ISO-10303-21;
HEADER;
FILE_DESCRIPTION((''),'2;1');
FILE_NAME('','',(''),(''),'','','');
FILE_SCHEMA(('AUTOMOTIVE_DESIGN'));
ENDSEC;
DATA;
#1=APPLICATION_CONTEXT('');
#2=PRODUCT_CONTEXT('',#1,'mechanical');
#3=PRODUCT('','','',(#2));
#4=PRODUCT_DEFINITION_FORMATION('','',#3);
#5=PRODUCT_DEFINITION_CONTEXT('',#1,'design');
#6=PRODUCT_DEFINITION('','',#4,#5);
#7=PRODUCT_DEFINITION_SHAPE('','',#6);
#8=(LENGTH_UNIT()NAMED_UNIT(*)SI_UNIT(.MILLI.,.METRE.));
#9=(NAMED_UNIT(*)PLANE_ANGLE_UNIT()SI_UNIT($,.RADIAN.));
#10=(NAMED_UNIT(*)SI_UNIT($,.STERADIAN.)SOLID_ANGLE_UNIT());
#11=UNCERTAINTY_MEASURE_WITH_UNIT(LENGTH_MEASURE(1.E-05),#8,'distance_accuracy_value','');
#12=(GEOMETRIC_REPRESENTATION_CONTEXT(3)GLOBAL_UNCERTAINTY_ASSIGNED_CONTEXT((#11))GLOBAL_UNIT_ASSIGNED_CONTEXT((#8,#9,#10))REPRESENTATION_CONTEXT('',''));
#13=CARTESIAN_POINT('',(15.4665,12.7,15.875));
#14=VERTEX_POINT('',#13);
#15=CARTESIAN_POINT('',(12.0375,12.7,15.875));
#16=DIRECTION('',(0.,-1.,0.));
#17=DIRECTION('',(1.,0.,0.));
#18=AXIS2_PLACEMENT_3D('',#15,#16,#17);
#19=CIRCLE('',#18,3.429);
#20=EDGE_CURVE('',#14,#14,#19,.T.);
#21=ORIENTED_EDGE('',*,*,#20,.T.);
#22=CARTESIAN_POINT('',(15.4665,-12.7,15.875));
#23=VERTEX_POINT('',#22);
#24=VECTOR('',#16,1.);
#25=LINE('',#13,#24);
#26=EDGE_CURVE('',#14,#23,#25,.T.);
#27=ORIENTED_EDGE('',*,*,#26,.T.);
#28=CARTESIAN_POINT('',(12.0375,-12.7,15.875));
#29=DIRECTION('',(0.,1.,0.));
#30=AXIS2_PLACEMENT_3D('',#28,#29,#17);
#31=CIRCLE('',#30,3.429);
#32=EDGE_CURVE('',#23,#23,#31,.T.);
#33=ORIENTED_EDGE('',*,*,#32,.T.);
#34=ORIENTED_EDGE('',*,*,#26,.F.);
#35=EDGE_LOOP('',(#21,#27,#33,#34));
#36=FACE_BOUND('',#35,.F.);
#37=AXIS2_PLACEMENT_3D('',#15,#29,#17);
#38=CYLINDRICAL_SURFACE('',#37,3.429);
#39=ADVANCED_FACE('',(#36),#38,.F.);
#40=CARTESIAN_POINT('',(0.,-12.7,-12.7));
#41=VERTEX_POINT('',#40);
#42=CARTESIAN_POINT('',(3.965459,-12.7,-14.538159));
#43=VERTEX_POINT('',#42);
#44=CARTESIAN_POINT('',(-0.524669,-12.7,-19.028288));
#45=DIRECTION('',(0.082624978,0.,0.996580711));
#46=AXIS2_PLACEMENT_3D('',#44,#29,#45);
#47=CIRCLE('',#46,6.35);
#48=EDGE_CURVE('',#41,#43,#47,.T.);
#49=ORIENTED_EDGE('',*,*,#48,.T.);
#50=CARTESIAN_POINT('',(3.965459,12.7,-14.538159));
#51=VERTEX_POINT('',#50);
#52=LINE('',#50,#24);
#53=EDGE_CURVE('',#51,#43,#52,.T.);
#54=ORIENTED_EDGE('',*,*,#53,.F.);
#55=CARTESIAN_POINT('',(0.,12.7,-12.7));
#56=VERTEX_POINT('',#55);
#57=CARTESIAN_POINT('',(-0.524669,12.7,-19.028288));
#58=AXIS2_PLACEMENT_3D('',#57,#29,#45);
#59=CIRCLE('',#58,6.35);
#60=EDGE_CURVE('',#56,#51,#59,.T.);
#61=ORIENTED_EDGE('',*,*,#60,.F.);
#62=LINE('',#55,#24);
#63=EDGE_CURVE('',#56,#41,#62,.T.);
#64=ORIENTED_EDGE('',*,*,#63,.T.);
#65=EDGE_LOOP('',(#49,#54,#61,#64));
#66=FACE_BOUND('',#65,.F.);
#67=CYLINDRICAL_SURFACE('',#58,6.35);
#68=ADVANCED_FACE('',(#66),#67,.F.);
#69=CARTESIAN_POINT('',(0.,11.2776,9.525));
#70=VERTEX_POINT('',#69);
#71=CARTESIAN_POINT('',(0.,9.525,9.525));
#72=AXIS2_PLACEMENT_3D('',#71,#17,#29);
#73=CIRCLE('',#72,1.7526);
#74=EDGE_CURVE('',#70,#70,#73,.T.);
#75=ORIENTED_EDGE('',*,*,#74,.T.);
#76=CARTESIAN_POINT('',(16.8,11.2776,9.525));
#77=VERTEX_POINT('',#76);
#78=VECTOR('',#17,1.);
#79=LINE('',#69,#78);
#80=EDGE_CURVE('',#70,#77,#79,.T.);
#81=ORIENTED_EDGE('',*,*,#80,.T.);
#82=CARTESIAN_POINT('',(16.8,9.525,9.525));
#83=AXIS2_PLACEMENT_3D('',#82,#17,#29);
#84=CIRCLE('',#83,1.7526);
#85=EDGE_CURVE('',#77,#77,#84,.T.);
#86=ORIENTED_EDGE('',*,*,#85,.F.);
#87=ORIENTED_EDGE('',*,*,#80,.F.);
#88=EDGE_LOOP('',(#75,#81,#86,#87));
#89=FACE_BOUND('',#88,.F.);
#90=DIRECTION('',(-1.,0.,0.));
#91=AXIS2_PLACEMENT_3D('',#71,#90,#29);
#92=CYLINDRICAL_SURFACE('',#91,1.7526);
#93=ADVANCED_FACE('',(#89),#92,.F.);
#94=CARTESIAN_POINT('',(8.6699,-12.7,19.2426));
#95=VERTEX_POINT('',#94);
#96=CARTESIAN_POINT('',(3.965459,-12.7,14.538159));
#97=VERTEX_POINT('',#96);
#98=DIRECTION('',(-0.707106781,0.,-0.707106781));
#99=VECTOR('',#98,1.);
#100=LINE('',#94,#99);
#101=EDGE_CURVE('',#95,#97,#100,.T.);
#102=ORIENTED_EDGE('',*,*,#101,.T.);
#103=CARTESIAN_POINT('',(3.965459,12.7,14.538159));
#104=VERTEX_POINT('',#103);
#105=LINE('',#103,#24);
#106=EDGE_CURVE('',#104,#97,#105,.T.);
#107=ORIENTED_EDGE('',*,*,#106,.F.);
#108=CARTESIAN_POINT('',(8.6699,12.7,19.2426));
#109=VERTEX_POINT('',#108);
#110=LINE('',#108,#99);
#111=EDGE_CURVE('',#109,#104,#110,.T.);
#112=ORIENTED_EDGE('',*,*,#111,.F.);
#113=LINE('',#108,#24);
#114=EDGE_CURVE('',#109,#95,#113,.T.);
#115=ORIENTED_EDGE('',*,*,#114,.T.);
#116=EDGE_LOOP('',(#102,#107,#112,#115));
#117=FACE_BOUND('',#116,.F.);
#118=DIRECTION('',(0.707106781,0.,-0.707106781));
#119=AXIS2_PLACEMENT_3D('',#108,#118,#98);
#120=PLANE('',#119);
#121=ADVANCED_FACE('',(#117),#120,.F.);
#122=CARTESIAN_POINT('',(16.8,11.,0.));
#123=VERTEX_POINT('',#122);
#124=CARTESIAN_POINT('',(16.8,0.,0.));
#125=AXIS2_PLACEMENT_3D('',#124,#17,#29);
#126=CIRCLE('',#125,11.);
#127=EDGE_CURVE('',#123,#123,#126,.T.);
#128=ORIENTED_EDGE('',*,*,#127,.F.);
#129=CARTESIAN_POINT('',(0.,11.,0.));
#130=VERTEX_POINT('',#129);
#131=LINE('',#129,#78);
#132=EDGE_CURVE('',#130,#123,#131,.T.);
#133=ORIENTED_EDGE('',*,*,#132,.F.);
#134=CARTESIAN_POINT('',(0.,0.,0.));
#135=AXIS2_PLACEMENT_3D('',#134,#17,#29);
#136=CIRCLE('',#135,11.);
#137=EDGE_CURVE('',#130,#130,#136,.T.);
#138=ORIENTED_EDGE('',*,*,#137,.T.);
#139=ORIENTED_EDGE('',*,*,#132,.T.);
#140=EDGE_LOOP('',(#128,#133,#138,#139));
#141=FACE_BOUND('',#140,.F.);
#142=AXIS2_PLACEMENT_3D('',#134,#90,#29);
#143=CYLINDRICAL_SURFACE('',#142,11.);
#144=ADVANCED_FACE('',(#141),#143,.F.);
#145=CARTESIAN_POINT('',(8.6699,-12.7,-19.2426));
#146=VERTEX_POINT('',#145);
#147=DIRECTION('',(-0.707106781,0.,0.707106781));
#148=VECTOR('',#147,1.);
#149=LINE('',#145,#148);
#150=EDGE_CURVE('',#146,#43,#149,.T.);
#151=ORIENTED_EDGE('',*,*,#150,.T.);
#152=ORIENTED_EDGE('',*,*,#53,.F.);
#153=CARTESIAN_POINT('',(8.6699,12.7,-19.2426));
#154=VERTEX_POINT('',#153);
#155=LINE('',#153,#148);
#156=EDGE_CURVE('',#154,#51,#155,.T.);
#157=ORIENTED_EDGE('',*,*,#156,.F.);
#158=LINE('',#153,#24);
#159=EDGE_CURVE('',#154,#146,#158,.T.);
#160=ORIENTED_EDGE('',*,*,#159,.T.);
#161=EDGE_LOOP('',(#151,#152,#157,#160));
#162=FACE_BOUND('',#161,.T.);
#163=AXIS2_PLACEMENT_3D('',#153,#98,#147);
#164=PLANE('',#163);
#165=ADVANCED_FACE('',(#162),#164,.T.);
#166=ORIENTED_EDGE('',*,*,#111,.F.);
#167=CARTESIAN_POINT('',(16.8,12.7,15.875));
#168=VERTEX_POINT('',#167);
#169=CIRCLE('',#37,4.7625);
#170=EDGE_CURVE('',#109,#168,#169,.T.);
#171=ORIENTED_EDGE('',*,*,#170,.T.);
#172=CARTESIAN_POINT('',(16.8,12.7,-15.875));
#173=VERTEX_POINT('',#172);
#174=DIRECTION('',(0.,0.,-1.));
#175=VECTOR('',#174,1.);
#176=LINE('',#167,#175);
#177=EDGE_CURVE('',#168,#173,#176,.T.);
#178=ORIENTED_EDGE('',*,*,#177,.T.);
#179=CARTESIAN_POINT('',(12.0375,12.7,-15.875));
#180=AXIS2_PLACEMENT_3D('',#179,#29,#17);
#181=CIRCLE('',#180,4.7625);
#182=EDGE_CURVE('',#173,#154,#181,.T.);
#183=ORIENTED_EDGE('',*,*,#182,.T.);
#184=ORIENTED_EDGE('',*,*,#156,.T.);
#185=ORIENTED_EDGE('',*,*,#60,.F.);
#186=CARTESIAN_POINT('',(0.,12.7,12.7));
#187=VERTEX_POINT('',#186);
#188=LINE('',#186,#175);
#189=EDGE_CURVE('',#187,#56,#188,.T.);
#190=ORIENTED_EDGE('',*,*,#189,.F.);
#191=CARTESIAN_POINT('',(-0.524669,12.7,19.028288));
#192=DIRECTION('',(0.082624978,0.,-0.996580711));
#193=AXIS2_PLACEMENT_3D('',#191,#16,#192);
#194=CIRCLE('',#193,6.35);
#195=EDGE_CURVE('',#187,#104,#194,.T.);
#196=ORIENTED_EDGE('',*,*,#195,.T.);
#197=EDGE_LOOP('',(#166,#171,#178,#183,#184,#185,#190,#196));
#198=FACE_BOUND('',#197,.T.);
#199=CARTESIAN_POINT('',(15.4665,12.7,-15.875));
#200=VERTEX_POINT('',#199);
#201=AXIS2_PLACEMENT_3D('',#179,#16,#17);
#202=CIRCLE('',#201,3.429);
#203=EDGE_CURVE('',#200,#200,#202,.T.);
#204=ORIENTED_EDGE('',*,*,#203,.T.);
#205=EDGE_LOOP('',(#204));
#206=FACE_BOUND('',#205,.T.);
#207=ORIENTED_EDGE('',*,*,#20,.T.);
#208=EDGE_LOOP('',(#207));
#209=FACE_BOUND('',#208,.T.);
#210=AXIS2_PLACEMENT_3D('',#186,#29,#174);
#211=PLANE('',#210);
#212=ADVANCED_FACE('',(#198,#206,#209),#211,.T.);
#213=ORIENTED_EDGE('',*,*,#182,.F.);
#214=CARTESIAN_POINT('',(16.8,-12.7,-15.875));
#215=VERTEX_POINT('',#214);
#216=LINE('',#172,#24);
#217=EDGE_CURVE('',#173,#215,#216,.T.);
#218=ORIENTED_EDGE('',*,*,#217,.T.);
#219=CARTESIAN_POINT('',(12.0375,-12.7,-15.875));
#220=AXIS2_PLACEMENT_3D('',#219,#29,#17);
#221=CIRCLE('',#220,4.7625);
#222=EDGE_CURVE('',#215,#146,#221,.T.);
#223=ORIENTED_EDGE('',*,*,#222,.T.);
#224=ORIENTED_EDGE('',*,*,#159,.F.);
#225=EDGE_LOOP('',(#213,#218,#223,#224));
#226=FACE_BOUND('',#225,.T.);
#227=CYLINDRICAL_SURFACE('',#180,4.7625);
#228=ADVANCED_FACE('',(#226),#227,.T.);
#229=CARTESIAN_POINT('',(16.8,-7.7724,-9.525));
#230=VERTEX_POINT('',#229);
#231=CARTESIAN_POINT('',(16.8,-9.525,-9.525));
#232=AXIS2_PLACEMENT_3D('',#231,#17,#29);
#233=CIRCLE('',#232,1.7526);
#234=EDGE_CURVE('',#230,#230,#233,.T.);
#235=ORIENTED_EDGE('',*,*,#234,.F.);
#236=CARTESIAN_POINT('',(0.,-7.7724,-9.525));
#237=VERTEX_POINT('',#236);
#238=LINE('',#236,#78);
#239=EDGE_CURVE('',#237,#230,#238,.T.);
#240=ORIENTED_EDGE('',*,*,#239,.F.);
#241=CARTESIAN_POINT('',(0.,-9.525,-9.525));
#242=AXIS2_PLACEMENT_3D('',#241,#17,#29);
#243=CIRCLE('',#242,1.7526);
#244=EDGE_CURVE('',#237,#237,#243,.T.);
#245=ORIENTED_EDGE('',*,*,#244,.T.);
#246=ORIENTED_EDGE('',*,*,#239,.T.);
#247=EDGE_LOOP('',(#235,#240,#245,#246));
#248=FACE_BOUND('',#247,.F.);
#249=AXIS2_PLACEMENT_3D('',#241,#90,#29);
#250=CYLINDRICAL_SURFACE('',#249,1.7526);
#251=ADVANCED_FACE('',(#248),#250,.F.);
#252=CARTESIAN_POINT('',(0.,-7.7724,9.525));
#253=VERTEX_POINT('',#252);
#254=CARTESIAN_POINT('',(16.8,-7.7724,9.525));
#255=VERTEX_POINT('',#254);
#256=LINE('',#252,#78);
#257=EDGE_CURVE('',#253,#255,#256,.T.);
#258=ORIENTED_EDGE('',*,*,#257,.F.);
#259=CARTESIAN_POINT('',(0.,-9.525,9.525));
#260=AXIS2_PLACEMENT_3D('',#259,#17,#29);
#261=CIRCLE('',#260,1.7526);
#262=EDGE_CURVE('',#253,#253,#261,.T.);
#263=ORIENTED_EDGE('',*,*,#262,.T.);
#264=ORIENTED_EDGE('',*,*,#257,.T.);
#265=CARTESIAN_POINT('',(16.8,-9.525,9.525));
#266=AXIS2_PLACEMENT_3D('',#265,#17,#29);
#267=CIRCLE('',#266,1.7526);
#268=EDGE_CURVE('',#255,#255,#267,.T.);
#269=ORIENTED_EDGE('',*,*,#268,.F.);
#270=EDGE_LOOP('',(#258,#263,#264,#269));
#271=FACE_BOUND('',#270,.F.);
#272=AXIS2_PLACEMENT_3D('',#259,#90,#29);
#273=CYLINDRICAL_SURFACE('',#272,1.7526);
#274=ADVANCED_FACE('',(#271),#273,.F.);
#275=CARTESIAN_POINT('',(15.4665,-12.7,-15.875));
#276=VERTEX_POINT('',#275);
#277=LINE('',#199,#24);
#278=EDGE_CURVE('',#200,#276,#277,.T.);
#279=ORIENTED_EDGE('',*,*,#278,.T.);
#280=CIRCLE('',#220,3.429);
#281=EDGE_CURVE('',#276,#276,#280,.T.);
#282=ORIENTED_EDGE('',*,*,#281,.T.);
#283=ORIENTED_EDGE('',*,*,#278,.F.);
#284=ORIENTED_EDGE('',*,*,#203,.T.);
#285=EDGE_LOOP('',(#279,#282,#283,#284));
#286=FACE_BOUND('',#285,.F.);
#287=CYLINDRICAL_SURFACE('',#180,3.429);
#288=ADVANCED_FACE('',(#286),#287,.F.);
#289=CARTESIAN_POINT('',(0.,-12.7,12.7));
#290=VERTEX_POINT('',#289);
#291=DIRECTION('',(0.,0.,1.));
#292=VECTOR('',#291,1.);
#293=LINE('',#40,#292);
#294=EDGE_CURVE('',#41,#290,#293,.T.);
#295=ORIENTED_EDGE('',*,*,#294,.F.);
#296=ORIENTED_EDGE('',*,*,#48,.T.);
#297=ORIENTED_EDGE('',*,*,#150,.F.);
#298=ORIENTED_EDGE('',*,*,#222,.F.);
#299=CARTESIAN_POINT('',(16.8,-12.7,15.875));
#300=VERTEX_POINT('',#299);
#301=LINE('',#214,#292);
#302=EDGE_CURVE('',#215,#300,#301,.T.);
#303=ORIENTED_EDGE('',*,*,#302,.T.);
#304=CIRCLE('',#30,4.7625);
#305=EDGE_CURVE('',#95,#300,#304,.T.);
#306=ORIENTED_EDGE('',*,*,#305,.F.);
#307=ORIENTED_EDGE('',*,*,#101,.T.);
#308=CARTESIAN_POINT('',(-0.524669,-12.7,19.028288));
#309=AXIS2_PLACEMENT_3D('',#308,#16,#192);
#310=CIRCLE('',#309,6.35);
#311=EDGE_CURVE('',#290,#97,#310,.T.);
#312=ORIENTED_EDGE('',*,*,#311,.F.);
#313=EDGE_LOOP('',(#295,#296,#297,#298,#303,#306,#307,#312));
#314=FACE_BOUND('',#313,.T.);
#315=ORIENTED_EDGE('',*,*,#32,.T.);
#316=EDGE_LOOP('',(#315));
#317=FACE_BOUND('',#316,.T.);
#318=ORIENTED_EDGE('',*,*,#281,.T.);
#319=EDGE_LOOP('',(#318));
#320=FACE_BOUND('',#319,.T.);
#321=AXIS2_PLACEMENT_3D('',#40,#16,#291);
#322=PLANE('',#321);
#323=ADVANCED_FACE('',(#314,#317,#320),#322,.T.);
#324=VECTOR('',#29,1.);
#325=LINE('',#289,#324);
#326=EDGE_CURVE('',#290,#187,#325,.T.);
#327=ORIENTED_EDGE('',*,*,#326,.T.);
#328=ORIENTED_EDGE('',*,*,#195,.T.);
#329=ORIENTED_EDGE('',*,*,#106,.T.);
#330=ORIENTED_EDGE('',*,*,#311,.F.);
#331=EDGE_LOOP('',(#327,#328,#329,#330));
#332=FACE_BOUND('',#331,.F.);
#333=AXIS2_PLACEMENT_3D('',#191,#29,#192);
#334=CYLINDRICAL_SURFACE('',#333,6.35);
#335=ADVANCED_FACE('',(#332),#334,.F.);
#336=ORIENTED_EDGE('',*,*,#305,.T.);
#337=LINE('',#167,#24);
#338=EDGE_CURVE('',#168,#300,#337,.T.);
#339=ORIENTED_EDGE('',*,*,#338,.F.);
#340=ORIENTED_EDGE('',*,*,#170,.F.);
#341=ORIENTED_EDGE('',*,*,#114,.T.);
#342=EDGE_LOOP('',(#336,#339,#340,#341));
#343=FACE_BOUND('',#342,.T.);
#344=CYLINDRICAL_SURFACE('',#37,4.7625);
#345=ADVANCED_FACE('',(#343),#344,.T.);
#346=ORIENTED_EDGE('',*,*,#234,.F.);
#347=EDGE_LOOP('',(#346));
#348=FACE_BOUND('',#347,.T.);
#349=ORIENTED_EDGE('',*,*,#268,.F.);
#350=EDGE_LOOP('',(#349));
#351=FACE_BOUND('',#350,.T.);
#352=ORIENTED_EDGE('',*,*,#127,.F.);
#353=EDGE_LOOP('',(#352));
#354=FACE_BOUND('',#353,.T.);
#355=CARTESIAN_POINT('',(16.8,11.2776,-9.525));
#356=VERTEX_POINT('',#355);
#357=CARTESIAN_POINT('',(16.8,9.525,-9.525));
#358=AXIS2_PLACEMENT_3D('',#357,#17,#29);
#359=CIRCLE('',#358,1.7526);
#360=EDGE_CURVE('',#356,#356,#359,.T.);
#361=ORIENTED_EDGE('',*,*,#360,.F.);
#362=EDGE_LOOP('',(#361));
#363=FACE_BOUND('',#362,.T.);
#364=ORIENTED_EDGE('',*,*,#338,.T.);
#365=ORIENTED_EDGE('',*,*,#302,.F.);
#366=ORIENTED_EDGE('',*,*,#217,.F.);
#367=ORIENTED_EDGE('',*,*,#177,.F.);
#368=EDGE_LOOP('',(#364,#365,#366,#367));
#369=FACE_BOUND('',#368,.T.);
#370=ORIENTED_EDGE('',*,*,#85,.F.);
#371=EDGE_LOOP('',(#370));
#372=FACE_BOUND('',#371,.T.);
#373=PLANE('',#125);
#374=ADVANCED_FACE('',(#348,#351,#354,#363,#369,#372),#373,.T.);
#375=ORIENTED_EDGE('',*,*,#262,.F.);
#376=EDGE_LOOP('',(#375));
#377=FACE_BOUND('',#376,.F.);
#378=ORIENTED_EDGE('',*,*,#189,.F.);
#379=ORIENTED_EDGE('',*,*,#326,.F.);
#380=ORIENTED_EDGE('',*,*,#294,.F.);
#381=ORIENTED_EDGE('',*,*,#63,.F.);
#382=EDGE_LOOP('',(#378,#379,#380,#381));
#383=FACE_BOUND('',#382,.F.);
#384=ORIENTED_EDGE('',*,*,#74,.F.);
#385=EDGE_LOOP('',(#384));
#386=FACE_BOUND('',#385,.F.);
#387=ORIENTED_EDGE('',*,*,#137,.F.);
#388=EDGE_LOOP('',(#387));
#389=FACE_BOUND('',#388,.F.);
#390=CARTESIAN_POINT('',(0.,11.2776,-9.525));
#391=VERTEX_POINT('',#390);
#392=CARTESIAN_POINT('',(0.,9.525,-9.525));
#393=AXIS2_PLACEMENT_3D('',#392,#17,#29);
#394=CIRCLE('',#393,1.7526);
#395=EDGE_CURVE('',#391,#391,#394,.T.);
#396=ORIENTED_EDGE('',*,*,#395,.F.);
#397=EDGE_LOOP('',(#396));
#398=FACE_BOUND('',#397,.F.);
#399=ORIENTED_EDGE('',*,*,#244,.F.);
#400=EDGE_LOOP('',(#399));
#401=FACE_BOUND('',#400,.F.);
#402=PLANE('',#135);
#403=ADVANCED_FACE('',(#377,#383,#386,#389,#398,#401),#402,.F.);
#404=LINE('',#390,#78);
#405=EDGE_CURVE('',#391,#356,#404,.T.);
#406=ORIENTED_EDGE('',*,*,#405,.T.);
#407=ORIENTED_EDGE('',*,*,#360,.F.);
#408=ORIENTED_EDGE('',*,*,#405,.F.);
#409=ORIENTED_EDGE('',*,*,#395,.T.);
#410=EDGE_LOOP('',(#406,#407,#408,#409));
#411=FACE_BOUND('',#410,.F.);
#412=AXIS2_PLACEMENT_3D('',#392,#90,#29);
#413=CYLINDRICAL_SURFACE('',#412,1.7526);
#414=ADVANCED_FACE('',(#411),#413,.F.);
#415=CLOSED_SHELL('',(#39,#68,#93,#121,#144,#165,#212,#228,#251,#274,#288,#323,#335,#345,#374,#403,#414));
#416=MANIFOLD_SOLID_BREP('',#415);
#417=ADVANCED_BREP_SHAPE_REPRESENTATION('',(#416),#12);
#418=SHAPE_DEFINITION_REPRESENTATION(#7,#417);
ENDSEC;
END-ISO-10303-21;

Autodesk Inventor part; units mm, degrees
ref_plane "YZ Plane" through (0, 0, 0) normal (1, 0, 0) x (0, 1, 0)
ref_plane "XZ Plane" through (0, 0, 0) normal (0, 1, 0) x (-1, 0, 0)
ref_plane "XY Plane" through (0, 0, 0) normal (0, 0, 1) x (1, 0, 0)
sketch "Sketch1" plane through (0, 0, 0) normal (1, 0, 0) x (0, 1, 0)
  circle A0 centre (0, 0) radius 11
  line L0 (-12.7, 12.7) -> (12.7, 12.7)
  line L1 (12.7, 12.7) -> (12.7, -12.7)
  line L2 (12.7, -12.7) -> (-12.7, -12.7)
  line L3 (-12.7, -12.7) -> (-12.7, 12.7)
  line L4 (-12.7, 12.7) -> (12.7, -12.7) construction
  line L5 (12.7, 12.7) -> (-12.7, -12.7) construction
  line L6 (-9.525, 9.525) -> (9.525, 9.525) construction
  line L7 (9.525, 9.525) -> (9.525, -9.525) construction
  line L8 (9.525, -9.525) -> (-9.525, -9.525) construction
  line L9 (-9.525, -9.525) -> (-9.525, 9.525) construction
  line L10 (-9.525, 9.525) -> (9.525, -9.525) construction
  line L11 (9.525, 9.525) -> (-9.525, -9.525) construction
  circle A1 centre (9.525, 9.525) radius 1.7526
  circle A2 centre (-9.525, 9.525) radius 1.7526
  circle A3 centre (-9.525, -9.525) radius 1.7526
  circle A4 centre (9.525, -9.525) radius 1.7526
  dimension "d0" = 22
  dimension "d1" = 25.4
  dimension "d2" = 25.4
  dimension "d3" = 19.05
  dimension "d4" = 19.05
  dimension "d5" = 3.5052
  dimension "d8" = 360
extrude "Extrusion1" add sketch "Sketch1" along normal blind 16.8
sketch "Sketch2" plane through (0, 12.7, 12.7) normal (0, 1, 0) x (1, 0, 0)
  circle A0 centre (12.0375, -3.175) radius 4.7625
  circle A1 centre (12.0375, -3.175) radius 3.175
  line L0 (0, 0) -> (16.8, 0) projected
  line L1 (16.8, 25.4) -> (16.8, 0) projected
  line L2 (0, 12.7) -> (16.8, 12.7) construction
  line L3 (8.6699, -6.5426) -> (2.1273, 0)
  line L4 (16.8, -3.175) -> (16.8, 0)
  circle A2 centre (12.0375, 28.575) radius 4.7625
  circle A3 centre (12.0375, 28.575) radius 3.175
  line L5 (0, 25.4) -> (16.8, 25.4)
  line L6 (8.6699, 31.9426) -> (2.1273, 25.4)
  line L7 (16.8, 28.575) -> (16.8, 25.4)
  dimension "d12" = 9.525
  dimension "d13" = 6.35
  dimension "d14" = 45
extrude "Extrusion2" add sketch "Sketch2" against normal up to surface (25.4 mm away) contours A0 L0 | L3 L0 A0 | A0 L0 L4 | A2 L5 | L7 L5 A2 | A2 L5 L6 picked at (16.1976, -2.5571) picked at (16.1976, 27.9571)
fillet "Fillet1" radius 6.35 2 edges at (2.1273, 0, -12.7) (2.1273, 0, 12.7)
thicken "Thicken1" operation cut thickness 0.254 both sides no extend neighbours no toward (0.9967573, 0, 0.0804666) faces at (15.2022, -4.2333, 16.1305)
thicken "Thicken2" operation cut thickness 0.254 both sides no extend neighbours no toward (0.9870503, 0, -0.1604113) faces at (15.1714, 4.2333, -16.3843)
properties part number "Motor Sleeve" material "UHMW, Black"
